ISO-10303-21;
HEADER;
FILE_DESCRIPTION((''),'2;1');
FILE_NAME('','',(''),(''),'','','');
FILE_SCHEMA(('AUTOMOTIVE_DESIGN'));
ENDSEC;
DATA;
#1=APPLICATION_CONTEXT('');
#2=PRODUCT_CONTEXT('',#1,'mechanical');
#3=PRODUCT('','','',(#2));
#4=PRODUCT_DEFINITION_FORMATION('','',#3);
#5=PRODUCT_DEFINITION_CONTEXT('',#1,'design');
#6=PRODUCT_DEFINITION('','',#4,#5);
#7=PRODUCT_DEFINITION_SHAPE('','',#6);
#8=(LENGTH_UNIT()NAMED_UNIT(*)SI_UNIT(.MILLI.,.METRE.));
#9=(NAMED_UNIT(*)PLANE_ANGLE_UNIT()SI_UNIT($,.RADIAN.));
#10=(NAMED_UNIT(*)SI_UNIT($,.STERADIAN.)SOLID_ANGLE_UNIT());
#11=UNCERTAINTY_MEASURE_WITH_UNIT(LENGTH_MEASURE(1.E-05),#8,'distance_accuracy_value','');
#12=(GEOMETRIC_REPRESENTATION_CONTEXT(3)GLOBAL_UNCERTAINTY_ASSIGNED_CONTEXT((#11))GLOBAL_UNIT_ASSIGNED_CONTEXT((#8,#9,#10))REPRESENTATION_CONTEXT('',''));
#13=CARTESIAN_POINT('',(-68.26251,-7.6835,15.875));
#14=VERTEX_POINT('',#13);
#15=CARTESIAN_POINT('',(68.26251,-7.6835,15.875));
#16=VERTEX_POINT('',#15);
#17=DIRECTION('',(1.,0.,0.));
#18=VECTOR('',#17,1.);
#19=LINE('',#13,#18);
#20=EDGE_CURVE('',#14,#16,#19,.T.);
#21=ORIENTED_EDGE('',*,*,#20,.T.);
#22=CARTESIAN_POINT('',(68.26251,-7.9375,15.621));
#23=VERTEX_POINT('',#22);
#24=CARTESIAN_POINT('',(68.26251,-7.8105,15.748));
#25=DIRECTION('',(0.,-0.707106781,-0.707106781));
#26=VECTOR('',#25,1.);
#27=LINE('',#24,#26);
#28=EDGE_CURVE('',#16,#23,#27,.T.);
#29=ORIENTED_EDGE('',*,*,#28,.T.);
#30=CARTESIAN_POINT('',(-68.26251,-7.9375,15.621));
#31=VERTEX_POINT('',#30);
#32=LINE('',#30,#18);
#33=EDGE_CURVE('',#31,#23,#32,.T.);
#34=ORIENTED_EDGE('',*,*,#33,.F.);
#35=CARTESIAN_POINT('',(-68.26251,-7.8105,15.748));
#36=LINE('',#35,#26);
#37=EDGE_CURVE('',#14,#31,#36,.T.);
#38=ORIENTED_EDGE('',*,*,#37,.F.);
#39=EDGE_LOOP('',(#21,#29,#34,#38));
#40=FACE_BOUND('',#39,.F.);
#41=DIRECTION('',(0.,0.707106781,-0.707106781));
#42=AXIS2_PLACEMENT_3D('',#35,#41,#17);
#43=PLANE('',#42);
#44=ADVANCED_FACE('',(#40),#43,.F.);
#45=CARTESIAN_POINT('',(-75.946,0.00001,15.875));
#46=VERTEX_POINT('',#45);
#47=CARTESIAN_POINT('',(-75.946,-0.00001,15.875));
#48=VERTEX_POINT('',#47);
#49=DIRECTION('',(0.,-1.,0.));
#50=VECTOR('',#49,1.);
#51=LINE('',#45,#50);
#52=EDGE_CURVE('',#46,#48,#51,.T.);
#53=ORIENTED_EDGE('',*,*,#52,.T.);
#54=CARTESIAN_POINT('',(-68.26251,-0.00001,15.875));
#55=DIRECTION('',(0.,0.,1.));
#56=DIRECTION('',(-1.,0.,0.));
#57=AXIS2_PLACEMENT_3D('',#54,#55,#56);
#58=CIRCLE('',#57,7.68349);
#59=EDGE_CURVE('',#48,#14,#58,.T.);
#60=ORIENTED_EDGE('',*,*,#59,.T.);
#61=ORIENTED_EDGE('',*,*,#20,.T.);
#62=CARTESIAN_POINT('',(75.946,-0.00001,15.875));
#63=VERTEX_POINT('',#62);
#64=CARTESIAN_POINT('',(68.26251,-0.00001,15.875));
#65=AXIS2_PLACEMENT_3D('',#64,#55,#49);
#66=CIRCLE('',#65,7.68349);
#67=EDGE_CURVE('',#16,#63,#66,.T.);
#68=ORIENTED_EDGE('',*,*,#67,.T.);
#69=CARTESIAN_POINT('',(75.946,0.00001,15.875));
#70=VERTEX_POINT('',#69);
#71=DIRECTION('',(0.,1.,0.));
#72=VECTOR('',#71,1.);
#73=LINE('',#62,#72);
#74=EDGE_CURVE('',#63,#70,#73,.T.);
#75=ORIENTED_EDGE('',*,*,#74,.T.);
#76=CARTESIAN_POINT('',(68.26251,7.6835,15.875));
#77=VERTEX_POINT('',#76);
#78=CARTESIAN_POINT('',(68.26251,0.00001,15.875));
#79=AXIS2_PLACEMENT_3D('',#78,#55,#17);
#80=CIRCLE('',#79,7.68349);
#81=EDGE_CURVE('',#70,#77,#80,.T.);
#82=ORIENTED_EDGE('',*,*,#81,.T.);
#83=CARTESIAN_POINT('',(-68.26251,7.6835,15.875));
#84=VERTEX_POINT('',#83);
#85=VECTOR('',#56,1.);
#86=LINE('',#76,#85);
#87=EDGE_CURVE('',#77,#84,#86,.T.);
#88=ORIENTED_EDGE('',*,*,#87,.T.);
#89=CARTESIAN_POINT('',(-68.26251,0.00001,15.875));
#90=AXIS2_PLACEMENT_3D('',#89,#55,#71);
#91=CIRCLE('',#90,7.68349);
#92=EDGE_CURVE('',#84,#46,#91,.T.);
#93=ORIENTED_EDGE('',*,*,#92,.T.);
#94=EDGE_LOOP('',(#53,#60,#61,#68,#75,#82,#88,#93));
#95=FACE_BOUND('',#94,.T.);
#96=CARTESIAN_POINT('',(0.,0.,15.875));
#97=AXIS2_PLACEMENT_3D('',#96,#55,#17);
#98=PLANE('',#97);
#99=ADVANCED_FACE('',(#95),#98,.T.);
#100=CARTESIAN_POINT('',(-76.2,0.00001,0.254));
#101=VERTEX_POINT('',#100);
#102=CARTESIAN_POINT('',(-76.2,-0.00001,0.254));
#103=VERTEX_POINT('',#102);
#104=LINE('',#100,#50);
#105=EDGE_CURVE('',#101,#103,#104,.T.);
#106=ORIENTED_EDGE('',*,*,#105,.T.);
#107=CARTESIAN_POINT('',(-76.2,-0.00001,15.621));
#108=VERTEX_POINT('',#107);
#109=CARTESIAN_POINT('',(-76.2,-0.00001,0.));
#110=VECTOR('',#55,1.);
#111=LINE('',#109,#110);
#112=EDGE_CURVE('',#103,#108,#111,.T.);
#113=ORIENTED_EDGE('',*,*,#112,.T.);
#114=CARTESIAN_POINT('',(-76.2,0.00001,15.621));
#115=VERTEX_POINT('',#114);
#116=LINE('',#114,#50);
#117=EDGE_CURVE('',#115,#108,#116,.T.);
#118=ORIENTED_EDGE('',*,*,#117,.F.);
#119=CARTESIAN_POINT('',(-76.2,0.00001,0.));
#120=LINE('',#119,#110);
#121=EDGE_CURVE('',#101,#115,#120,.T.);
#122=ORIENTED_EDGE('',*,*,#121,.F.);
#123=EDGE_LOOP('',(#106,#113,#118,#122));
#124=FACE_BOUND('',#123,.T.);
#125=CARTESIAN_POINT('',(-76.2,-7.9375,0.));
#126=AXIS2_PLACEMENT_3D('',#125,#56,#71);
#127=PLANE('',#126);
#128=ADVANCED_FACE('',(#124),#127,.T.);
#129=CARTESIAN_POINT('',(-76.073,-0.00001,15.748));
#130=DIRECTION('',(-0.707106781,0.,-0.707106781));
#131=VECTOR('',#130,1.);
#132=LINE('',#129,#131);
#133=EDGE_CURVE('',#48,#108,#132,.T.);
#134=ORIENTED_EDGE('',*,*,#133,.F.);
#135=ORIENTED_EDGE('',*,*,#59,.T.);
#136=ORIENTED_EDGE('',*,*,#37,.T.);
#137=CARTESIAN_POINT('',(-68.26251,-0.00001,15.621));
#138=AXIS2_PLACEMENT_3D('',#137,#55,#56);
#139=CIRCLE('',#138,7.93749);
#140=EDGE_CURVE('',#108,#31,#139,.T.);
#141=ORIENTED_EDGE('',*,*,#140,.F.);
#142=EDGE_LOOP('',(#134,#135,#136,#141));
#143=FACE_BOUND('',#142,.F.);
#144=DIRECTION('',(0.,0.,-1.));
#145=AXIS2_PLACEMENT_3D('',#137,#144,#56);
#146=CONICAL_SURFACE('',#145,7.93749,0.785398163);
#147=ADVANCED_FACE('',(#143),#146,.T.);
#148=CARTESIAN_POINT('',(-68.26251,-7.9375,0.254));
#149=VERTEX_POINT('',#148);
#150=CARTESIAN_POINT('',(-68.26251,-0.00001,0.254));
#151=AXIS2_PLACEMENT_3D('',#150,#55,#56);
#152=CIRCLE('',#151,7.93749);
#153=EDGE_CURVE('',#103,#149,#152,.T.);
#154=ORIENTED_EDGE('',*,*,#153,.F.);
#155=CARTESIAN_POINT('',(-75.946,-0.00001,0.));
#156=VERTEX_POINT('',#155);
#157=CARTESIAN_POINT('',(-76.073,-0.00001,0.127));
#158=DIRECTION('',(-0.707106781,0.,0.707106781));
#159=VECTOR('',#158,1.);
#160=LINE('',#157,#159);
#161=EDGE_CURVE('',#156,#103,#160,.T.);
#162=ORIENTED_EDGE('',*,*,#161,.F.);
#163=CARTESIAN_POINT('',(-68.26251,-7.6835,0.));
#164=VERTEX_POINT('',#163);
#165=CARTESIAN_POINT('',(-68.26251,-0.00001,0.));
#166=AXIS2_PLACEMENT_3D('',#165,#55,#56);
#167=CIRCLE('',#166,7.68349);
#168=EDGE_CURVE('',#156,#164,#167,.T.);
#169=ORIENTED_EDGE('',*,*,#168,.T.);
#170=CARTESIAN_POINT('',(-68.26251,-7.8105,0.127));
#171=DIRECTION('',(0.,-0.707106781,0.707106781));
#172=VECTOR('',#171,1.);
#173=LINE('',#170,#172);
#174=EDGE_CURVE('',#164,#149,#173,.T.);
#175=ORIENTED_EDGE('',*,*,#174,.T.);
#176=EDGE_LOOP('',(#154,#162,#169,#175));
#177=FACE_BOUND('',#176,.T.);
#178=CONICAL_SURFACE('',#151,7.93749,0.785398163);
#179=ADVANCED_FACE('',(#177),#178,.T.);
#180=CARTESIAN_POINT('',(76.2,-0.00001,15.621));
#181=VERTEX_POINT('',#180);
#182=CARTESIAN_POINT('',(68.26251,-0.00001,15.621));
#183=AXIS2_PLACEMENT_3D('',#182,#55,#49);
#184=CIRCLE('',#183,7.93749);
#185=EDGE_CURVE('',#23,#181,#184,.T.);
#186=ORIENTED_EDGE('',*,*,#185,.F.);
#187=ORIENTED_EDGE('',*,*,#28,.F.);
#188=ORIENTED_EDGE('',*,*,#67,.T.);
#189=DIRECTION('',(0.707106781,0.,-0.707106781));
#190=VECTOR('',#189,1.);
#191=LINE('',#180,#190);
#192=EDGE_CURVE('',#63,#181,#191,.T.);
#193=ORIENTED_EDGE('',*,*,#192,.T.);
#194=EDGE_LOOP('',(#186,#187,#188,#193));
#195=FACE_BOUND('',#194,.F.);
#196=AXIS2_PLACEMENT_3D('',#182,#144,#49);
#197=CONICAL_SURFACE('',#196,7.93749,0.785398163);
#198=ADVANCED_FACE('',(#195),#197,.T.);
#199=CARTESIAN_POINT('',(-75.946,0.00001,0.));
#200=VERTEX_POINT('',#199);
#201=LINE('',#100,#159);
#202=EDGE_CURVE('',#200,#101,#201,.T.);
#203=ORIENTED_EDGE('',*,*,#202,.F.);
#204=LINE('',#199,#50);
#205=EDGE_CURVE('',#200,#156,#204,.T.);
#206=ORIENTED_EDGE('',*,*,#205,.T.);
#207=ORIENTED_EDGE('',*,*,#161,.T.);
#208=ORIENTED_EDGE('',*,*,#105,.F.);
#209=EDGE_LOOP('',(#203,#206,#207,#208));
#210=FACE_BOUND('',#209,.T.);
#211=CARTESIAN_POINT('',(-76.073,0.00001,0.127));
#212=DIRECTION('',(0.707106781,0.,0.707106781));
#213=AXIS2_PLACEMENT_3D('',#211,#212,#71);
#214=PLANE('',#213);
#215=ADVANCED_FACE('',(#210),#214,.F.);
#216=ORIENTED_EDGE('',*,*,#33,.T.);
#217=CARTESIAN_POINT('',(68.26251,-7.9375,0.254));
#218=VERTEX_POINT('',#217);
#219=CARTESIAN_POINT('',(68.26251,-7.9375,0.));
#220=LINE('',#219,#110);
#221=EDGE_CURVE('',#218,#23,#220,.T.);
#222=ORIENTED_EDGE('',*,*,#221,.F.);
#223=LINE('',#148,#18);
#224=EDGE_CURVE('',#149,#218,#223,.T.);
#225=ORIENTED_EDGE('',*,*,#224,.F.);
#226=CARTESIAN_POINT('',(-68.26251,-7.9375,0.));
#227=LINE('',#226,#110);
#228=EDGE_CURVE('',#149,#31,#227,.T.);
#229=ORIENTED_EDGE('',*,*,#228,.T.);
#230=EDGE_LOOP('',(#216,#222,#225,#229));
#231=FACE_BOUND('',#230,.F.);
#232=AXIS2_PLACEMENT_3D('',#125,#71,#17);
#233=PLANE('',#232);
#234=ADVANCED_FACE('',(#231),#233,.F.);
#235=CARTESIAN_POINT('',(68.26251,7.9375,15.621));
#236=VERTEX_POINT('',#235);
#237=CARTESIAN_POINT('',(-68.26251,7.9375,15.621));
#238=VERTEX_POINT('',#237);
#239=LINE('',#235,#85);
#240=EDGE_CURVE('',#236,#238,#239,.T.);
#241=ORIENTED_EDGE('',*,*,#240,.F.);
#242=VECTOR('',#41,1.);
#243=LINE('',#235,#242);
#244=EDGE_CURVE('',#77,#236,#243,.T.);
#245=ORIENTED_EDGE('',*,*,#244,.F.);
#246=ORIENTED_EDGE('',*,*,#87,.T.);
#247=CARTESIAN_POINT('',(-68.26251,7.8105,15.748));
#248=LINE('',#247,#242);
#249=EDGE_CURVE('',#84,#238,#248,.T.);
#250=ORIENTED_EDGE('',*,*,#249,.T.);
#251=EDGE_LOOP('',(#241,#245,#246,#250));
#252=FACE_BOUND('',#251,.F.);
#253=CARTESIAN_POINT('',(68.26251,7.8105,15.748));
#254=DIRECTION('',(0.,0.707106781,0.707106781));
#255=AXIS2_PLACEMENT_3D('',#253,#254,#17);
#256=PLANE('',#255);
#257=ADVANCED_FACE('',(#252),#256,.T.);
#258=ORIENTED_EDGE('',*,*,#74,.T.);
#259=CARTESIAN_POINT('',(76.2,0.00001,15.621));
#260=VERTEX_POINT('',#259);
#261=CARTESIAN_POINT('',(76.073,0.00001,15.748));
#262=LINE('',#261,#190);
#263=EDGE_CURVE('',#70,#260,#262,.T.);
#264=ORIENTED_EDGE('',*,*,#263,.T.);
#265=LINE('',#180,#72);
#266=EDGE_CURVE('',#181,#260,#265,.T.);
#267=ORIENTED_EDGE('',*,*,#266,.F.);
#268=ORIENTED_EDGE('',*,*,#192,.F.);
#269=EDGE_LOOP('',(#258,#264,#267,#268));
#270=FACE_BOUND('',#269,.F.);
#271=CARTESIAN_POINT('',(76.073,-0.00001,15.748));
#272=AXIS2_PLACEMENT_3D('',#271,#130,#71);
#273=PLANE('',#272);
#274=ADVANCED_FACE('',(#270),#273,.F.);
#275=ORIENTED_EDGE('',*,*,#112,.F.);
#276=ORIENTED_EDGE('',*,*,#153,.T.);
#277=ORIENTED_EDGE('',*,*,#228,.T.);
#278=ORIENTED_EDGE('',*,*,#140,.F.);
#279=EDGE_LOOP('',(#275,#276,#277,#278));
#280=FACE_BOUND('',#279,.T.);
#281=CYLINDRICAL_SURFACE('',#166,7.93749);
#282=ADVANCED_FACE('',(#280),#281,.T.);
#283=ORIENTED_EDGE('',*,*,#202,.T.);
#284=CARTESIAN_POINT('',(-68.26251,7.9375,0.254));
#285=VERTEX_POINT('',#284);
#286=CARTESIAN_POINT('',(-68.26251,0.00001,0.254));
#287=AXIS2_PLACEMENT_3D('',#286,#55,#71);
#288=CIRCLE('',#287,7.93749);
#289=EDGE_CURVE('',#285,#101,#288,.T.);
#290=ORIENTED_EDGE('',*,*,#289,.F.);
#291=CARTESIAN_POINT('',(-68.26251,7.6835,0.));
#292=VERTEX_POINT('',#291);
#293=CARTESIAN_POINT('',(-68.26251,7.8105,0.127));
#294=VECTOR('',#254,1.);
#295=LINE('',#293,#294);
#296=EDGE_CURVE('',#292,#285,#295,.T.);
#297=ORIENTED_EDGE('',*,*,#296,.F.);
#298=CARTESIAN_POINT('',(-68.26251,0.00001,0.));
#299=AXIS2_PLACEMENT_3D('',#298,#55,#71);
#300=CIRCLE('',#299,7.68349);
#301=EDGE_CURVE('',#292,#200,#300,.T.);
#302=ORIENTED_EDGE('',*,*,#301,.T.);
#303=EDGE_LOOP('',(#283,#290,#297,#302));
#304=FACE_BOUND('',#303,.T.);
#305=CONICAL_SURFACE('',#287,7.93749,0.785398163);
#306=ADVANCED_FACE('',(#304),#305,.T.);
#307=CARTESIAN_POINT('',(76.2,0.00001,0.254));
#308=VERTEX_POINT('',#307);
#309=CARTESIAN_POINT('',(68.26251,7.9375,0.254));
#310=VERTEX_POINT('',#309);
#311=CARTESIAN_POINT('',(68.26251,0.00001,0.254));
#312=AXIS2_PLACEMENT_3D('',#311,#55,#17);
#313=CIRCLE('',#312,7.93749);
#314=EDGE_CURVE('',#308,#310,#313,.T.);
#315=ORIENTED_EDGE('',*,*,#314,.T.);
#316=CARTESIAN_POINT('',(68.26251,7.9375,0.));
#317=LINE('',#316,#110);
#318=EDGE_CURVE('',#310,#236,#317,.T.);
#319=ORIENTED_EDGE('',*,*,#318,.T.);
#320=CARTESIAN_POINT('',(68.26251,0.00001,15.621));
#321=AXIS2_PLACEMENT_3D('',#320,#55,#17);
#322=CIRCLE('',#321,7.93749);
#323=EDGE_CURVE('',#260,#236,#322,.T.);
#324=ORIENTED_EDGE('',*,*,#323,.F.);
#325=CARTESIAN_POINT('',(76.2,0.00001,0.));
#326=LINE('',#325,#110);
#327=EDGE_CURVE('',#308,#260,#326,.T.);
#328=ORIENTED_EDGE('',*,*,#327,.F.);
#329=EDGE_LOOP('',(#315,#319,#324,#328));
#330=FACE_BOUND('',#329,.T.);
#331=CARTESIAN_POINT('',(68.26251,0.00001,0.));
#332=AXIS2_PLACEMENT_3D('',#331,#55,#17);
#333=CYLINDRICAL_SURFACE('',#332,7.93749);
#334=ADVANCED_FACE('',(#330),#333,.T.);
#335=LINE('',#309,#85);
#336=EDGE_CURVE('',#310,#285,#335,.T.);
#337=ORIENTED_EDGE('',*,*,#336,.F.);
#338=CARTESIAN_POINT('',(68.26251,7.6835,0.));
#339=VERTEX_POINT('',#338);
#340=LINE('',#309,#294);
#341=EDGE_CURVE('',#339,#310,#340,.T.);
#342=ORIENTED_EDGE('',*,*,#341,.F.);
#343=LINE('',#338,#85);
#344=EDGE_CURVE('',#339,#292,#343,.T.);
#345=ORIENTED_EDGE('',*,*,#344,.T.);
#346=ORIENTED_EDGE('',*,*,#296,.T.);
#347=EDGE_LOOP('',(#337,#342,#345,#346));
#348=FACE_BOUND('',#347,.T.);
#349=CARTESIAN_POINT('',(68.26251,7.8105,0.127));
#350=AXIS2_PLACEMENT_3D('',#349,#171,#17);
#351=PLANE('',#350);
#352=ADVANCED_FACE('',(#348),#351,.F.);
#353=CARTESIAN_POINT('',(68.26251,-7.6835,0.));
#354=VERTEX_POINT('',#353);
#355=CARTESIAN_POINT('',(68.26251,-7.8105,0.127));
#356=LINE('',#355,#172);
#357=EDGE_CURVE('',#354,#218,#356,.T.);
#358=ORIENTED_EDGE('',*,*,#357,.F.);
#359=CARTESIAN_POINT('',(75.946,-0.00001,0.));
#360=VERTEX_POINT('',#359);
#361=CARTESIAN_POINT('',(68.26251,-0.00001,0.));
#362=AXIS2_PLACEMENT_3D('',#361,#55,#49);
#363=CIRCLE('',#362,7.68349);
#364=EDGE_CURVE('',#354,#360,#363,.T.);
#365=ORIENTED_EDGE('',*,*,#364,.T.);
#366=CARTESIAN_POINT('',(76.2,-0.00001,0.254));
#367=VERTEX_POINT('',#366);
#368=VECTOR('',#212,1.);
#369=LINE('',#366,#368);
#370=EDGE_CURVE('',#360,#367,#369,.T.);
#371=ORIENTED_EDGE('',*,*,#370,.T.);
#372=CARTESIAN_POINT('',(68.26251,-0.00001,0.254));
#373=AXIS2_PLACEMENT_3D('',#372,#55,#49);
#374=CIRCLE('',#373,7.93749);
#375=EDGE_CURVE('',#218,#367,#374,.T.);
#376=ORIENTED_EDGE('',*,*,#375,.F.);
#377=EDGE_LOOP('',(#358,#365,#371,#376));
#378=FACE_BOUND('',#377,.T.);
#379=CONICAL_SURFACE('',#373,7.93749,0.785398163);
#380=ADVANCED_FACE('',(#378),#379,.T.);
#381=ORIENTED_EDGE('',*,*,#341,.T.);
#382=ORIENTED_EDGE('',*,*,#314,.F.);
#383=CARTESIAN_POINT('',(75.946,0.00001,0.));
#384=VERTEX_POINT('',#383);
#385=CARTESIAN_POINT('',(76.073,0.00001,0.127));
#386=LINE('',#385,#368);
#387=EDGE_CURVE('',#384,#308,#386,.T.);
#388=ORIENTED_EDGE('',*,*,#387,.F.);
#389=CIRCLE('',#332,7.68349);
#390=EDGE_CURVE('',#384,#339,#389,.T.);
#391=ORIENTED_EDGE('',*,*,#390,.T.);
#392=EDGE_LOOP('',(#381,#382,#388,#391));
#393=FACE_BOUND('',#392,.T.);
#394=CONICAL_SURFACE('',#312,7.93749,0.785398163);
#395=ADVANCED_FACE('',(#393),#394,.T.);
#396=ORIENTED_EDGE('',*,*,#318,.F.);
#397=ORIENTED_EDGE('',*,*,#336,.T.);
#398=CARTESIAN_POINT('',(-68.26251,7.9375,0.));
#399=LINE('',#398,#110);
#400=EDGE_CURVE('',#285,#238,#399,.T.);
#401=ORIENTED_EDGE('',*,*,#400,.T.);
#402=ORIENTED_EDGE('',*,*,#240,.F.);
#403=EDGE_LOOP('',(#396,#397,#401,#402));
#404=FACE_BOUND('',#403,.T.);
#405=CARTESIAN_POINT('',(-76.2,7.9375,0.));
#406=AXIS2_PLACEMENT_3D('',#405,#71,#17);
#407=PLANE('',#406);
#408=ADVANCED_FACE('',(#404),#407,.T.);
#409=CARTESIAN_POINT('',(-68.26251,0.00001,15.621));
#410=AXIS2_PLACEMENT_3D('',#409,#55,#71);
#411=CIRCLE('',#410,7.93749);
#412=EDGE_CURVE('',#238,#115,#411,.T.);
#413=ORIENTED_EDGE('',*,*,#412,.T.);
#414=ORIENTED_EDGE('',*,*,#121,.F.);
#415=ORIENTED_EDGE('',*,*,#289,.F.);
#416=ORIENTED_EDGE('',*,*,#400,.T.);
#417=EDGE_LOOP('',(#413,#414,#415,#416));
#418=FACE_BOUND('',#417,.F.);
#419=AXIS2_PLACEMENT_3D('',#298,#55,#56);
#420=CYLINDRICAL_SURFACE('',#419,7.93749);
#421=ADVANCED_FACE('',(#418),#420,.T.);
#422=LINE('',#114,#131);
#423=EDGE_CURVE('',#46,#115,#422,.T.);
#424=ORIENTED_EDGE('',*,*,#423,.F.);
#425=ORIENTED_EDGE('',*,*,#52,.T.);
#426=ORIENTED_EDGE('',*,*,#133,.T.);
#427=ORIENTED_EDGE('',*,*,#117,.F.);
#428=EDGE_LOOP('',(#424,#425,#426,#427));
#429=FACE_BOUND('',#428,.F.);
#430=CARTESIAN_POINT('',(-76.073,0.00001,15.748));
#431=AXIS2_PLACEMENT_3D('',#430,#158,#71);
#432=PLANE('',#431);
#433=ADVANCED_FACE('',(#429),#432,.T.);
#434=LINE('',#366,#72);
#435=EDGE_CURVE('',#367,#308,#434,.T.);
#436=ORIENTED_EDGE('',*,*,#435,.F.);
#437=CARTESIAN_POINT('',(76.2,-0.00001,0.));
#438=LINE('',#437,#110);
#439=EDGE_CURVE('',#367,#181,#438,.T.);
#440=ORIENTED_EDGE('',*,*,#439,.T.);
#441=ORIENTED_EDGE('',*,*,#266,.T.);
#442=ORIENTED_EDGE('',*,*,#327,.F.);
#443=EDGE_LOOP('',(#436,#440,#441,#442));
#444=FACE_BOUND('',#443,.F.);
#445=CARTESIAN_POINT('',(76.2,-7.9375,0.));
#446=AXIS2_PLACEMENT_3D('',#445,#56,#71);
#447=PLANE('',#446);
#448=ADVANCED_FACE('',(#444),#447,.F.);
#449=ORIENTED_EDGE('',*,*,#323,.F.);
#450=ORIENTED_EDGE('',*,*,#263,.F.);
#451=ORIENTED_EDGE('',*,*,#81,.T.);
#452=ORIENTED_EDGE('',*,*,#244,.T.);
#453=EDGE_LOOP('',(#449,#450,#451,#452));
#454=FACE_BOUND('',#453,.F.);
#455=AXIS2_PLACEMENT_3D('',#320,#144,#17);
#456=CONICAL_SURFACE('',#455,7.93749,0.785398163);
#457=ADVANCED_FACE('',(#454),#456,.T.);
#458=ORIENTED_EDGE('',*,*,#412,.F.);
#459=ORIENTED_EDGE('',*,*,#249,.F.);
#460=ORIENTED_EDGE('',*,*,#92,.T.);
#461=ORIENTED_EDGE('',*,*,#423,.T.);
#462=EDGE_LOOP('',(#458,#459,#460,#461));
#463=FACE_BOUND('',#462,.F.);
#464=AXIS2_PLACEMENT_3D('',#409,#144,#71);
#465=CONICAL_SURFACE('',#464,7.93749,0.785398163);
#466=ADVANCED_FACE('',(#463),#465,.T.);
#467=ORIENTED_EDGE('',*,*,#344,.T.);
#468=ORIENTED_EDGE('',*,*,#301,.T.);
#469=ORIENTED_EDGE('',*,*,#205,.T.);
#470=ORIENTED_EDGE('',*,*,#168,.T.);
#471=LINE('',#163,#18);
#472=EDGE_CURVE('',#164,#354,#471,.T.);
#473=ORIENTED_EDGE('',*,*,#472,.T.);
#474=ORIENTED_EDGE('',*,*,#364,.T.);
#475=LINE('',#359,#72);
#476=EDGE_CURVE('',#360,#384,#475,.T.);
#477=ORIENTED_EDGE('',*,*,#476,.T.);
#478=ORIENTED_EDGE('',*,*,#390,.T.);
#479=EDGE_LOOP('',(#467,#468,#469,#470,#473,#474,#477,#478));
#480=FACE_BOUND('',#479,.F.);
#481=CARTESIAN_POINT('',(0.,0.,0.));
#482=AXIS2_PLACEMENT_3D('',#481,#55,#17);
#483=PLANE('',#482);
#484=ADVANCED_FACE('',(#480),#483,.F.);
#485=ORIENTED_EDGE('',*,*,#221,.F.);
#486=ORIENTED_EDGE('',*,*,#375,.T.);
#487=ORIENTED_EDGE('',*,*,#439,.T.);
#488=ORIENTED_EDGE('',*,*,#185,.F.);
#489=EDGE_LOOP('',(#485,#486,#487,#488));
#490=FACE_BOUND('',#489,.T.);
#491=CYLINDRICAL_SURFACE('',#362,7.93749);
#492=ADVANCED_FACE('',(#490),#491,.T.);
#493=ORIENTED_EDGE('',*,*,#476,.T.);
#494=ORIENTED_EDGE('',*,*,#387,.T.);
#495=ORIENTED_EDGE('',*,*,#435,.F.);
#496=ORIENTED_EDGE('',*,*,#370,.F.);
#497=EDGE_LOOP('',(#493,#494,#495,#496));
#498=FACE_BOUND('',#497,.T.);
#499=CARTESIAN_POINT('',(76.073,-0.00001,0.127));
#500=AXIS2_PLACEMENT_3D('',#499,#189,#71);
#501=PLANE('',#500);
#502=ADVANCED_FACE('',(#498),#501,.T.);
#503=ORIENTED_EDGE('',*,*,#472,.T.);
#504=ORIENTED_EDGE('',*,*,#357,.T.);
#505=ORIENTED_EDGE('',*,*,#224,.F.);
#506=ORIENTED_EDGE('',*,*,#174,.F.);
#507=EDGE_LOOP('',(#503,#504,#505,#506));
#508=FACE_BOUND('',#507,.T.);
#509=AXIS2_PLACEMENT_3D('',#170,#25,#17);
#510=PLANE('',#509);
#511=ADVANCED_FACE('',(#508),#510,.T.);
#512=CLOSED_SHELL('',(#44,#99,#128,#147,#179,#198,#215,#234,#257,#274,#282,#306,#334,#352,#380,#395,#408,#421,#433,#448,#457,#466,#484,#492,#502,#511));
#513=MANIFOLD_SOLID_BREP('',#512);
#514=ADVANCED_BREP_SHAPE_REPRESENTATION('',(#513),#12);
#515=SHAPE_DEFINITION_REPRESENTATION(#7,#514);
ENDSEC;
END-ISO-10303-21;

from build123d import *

# Parameters (mm, degrees)
F0_W     = 152.4
F0_H     = 15.875
F1_DEPTH = 15.875
F2_R     = 7.93749
F3_SIZE  = 0.254


# Not quite as in the source:
# - a fillet or chamfer is up to 0.001 mm smaller than in the source, because OpenCascade refuses the exact size


with BuildPart() as f1:
    # F0 (on Top) → F1 (new body)
    with BuildSketch(Plane.XY):
        Rectangle(F0_W, F0_H)
    extrude(amount=F1_DEPTH)

    # F2 (radius 7.9375 in the source; OpenCascade refuses exactly that, so slightly less here)
    f2_edges = [f1.edges().sort_by_distance(p)[0] for p in [
        (-76.2, 7.9375, 7.9375),
        (-76.2, -7.9375, 7.9375),
        (76.2, -7.9375, 7.9375),
        (76.2, 7.9375, 7.9375),
    ]]
    fillet(f2_edges, radius=F2_R)

    # F3
    f3_edges = [f1.edges().sort_by_distance(p)[0] for p in [
        (0, -7.9375, 0),
        (-73.875163, -5.612663, 0),
        (73.875163, -5.612663, 0),
        (-76.2, 0, 0),
        (76.2, 0, 0),
        (-73.875163, 5.612663, 0),
        (73.875163, 5.612663, 0),
        (0, 7.9375, 0),
        (0, -7.9375, 15.875),
        (-73.875163, -5.612663, 15.875),
        (73.875163, -5.612663, 15.875),
        (-76.2, 0, 15.875),
        (76.2, 0, 15.875),
        (-73.875163, 5.612663, 15.875),
        (73.875163, 5.612663, 15.875),
        (0, 7.9375, 15.875),
    ]]
    chamfer(f3_edges, length=F3_SIZE)


solid = f1.part
